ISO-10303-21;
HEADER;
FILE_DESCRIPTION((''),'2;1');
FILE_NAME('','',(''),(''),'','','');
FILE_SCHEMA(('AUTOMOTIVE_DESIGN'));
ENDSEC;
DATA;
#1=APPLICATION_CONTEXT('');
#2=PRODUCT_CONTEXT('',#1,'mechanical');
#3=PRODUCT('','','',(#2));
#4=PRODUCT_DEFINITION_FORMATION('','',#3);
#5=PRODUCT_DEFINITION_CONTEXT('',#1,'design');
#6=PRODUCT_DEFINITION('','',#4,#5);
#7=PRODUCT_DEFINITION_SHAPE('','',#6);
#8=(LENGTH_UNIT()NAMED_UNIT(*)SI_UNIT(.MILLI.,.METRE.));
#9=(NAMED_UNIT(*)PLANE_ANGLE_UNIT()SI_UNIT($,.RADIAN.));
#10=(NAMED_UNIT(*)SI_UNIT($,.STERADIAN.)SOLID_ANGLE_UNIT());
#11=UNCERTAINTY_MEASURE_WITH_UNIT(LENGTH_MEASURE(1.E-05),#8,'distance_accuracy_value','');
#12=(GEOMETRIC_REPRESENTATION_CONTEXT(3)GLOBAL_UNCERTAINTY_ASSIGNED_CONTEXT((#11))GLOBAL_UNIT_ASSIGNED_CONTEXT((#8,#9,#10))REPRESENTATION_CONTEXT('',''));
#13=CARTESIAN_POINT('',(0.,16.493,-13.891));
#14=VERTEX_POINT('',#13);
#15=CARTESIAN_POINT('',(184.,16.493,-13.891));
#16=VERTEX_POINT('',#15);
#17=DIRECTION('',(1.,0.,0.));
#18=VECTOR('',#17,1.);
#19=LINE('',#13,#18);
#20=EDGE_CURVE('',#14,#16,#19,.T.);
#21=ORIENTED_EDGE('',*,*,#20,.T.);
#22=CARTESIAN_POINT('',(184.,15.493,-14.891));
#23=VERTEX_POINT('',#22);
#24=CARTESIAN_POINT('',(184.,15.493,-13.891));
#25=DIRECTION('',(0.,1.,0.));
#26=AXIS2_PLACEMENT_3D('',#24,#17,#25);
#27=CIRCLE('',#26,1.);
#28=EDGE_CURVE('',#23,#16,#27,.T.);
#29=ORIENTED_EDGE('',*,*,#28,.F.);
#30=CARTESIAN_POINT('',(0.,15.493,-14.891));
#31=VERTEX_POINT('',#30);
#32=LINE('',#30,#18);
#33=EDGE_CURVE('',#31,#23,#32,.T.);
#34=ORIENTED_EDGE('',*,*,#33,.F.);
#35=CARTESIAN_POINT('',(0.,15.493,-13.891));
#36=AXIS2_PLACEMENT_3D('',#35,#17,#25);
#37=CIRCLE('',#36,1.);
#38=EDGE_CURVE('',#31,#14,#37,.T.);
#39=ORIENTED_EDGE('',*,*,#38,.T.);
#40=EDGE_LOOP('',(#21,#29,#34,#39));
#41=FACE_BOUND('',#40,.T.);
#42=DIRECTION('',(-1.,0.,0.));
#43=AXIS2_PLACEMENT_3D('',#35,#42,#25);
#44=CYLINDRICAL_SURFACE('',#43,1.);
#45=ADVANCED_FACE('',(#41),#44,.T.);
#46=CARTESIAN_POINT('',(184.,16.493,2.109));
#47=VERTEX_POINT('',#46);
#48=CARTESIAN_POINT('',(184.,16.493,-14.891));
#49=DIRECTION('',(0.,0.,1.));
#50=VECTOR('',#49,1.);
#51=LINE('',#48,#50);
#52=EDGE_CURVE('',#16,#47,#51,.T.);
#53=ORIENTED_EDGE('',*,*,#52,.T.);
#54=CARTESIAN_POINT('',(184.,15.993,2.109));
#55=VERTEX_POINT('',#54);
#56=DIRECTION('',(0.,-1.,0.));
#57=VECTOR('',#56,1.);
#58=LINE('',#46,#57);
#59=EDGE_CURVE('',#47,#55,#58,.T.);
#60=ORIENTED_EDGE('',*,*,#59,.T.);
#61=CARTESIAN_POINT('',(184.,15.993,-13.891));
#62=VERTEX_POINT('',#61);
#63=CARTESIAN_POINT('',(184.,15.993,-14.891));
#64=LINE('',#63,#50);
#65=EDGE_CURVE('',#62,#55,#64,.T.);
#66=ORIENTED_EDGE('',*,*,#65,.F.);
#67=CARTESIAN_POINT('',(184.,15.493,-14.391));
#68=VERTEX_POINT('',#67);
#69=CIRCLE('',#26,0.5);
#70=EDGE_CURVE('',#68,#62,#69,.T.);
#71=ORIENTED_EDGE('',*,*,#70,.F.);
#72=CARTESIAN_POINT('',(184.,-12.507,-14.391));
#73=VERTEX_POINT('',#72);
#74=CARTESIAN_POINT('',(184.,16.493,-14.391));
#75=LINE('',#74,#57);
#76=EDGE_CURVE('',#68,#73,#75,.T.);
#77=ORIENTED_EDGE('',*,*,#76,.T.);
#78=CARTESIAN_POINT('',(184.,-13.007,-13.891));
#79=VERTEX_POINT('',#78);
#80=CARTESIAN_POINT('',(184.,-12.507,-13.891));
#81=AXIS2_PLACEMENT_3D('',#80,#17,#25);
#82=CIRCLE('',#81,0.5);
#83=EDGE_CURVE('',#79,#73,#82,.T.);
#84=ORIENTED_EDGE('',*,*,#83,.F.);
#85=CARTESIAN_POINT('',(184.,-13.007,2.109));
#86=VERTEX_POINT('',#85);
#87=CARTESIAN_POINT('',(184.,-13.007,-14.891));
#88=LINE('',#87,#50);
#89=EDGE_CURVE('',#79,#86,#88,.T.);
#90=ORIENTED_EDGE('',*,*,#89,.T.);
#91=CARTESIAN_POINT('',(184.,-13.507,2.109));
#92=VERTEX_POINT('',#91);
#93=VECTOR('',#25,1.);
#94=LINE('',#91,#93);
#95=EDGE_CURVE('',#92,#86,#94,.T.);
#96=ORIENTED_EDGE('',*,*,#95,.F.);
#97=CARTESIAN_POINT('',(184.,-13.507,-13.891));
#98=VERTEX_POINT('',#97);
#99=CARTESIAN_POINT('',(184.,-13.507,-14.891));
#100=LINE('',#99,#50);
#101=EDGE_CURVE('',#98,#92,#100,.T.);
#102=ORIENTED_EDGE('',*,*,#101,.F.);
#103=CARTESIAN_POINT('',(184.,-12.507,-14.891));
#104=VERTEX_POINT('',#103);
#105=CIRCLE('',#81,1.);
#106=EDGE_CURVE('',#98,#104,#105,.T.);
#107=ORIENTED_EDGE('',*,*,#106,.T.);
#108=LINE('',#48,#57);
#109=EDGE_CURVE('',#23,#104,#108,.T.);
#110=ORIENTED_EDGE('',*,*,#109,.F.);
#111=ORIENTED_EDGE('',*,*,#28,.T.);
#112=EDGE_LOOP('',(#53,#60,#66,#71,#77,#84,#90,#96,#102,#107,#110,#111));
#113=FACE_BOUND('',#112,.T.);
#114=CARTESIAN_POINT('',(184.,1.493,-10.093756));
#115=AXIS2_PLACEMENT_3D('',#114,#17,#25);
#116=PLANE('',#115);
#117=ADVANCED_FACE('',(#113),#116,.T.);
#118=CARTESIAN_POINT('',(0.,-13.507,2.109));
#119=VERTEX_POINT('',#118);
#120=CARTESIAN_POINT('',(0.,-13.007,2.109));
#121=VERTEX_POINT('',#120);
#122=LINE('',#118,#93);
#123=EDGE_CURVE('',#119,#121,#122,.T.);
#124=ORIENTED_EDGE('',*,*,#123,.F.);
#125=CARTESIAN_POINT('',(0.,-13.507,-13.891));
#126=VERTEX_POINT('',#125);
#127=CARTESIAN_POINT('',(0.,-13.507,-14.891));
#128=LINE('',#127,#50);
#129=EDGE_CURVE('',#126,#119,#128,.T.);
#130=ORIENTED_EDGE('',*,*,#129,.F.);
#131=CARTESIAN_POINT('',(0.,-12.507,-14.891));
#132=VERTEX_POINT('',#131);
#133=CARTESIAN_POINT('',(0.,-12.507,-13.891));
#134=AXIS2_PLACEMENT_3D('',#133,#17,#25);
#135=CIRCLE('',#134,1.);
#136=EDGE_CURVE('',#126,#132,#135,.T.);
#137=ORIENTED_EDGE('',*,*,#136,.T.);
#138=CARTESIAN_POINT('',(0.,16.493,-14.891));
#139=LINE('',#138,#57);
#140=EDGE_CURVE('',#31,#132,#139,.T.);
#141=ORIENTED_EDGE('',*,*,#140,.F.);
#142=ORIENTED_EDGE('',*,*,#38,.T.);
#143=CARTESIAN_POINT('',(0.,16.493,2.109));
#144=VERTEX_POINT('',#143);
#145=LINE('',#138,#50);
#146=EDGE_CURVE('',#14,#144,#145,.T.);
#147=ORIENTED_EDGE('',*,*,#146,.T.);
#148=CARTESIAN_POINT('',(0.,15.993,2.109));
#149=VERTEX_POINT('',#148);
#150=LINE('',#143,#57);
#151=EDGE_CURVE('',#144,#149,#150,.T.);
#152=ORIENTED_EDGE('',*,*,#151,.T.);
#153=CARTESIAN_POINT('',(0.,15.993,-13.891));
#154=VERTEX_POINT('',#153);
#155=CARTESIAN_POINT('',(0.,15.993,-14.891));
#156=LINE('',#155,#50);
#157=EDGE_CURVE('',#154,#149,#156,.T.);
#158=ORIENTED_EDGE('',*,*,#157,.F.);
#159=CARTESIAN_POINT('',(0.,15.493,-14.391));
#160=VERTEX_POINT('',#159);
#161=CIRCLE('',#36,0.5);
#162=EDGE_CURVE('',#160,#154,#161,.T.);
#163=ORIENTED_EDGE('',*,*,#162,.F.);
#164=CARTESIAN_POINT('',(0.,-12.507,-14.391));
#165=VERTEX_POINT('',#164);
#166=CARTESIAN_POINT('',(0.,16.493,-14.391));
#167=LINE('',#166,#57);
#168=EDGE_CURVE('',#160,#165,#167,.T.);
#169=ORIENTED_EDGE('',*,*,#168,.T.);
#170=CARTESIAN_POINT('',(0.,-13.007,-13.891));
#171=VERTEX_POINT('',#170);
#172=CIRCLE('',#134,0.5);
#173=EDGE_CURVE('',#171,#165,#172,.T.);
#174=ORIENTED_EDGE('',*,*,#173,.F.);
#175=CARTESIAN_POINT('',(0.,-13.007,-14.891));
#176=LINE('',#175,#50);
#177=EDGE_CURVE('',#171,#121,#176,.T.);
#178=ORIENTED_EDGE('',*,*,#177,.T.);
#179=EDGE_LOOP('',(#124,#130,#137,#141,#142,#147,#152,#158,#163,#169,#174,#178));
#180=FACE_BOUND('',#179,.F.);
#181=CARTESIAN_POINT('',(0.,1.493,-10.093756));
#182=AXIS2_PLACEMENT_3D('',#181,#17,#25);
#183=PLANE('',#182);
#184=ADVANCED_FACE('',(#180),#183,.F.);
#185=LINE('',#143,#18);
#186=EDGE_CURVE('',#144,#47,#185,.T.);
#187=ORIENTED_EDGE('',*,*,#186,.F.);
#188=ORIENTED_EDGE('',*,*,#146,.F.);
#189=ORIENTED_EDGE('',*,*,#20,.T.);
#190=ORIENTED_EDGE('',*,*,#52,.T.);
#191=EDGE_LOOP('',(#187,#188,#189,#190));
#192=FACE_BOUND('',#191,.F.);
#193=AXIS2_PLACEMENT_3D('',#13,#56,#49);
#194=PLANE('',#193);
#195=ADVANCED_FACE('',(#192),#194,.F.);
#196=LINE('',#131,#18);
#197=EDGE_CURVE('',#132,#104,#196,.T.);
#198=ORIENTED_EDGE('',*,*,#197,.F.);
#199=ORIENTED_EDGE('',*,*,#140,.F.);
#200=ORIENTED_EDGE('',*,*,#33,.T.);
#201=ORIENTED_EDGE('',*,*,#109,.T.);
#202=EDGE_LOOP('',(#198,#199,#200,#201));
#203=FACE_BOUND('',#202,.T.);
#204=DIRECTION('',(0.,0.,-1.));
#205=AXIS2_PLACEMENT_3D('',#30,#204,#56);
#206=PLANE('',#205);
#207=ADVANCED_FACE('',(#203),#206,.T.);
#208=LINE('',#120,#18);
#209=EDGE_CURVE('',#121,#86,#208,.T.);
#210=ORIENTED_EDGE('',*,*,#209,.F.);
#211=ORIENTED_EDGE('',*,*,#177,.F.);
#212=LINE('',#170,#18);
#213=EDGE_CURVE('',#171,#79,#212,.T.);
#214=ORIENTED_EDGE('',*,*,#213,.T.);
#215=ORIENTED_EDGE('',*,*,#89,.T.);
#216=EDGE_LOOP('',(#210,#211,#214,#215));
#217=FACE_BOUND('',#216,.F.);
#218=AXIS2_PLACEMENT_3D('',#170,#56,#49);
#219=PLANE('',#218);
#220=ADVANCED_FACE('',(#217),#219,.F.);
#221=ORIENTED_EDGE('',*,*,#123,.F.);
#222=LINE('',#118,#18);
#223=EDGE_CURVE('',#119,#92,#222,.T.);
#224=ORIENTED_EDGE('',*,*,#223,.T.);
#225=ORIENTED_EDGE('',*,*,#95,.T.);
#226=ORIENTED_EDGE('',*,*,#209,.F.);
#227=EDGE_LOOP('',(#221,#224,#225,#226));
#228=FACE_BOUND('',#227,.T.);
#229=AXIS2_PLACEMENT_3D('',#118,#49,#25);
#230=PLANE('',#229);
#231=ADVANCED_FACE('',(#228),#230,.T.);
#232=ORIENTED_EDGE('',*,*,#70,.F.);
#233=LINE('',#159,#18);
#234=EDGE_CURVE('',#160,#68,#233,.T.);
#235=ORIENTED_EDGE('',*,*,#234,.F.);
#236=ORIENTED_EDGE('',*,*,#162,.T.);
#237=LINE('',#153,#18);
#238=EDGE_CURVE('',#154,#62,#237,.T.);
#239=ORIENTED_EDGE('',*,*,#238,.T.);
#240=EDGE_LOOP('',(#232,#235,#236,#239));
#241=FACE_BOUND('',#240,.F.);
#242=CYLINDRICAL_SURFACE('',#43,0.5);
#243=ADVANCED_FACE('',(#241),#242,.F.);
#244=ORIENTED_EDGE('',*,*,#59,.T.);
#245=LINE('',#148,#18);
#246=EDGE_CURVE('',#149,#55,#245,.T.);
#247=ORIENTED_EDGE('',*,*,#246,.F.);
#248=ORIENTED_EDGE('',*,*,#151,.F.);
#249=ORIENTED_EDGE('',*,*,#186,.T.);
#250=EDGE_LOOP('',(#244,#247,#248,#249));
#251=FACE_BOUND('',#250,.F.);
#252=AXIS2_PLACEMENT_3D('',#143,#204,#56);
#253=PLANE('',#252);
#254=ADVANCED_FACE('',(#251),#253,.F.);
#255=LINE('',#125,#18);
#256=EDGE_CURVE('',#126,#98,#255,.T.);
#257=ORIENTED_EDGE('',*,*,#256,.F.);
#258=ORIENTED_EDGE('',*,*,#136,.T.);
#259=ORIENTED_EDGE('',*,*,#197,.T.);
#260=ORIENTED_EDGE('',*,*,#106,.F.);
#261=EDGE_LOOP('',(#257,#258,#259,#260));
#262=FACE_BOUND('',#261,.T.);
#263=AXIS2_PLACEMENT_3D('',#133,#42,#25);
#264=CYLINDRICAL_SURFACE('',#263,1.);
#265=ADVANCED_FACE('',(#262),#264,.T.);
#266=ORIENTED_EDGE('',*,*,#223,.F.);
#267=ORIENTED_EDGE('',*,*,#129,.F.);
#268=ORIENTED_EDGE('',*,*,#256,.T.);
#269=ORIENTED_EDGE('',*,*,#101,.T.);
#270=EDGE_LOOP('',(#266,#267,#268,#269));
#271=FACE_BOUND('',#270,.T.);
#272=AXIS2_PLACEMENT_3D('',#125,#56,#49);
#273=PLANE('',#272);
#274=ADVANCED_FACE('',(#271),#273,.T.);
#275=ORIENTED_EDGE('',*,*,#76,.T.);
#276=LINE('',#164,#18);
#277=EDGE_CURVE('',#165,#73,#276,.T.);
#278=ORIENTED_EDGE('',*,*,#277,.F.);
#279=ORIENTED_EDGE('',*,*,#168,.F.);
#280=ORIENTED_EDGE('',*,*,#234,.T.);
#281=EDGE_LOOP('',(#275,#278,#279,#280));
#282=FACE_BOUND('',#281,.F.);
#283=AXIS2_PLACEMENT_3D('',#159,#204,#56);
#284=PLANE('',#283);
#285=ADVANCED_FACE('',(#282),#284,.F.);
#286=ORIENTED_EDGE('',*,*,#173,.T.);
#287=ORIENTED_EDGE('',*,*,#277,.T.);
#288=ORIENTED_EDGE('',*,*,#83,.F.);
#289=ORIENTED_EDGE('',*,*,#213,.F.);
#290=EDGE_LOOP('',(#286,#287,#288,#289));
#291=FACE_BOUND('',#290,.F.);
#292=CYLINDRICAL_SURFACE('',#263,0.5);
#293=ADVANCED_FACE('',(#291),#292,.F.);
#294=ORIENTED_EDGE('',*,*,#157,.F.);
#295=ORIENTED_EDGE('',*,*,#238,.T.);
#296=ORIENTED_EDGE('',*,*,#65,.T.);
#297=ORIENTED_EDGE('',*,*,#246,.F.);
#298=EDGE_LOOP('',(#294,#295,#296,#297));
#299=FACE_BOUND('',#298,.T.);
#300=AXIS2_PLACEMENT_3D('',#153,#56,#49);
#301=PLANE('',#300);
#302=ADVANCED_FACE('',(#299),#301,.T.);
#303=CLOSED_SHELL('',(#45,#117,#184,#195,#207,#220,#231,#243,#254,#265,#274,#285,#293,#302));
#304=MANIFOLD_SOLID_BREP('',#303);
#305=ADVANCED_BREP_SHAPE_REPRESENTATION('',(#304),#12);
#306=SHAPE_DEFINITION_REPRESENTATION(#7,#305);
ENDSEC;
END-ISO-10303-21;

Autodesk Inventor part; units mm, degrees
ref_plane "YZ Plane" through (0, 0, 0) normal (1, 0, 0) x (0, 1, 0)
ref_plane "XZ Plane" through (0, 0, 0) normal (0, 1, 0) x (-1, 0, 0)
ref_plane "XY Plane" through (0, 0, 0) normal (0, 0, 1) x (1, 0, 0)
sketch "Szkic1" plane through (0, 0, 0) normal (1, 0, 0) x (0, 1, 0)
  line L0 (-19.507, 0) -> (22.493, 0)
  line L1 (0, -18.291) -> (0, 5.509)
  line L2 (16.493, -14.891) -> (-13.507, -14.891)
  line L3 (-13.507, -14.891) -> (-13.507, 2.109)
  line L4 (16.493, -14.891) -> (16.493, 2.109)
  point P0 (0, 0)
  dimension "d1" = 30
  dimension "d2" = 17
  dimension "d3" = 17
contour flange "Kołnierz z profilu1" sketch "Szkic1" thickness 0.5 bend radius 0.5 width 184 along (1, 0, 0) mid plane no both sides no wall seen from (0, 16.493, -6.391) lies toward (0, -1, 0) curves L4 L2 L3
bend "Gięcie1"
corner "Narożnik1"
equation "\"d3\" = d2"
equation "\"d4\" = SzerokośćGięciaPodcięcia"
equation "\"d5\" = GłębokośćGięciaPodcięcia"
equation "\"d6\" = MinimalnaPozostałość"
equation "\"d7\" = PromieńGięcia"
equation "\"d9\" = PromieńGięcia"
equation "\"d11\" = RozmiarPodcięciaNarożnika"
equation "\"d12\" = Wielk_odstępu"
equation "\"d13\" = Rozmiar_promienia_Jacobiego"
equation "\"PromieńGięcia\" = Grubość"
equation "\"SzerokośćGięciaPodcięcia\" = Grubość"
equation "\"GłębokośćGięciaPodcięcia\" = 0.5 * Grubość"
equation "\"RozmiarPodcięciaNarożnika\" = 4 * Grubość"
equation "\"MinimalnaPozostałość\" = 2 * Grubość"
equation "\"PromieńPrzejścia\" = PromieńGięcia"
equation "\"Rozmiar_promienia_Jacobiego\" = PromieńGięcia"
equation "\"Wielk_odstępu\" = Grubość"
equation "\"Grubość\" = 0.5"
